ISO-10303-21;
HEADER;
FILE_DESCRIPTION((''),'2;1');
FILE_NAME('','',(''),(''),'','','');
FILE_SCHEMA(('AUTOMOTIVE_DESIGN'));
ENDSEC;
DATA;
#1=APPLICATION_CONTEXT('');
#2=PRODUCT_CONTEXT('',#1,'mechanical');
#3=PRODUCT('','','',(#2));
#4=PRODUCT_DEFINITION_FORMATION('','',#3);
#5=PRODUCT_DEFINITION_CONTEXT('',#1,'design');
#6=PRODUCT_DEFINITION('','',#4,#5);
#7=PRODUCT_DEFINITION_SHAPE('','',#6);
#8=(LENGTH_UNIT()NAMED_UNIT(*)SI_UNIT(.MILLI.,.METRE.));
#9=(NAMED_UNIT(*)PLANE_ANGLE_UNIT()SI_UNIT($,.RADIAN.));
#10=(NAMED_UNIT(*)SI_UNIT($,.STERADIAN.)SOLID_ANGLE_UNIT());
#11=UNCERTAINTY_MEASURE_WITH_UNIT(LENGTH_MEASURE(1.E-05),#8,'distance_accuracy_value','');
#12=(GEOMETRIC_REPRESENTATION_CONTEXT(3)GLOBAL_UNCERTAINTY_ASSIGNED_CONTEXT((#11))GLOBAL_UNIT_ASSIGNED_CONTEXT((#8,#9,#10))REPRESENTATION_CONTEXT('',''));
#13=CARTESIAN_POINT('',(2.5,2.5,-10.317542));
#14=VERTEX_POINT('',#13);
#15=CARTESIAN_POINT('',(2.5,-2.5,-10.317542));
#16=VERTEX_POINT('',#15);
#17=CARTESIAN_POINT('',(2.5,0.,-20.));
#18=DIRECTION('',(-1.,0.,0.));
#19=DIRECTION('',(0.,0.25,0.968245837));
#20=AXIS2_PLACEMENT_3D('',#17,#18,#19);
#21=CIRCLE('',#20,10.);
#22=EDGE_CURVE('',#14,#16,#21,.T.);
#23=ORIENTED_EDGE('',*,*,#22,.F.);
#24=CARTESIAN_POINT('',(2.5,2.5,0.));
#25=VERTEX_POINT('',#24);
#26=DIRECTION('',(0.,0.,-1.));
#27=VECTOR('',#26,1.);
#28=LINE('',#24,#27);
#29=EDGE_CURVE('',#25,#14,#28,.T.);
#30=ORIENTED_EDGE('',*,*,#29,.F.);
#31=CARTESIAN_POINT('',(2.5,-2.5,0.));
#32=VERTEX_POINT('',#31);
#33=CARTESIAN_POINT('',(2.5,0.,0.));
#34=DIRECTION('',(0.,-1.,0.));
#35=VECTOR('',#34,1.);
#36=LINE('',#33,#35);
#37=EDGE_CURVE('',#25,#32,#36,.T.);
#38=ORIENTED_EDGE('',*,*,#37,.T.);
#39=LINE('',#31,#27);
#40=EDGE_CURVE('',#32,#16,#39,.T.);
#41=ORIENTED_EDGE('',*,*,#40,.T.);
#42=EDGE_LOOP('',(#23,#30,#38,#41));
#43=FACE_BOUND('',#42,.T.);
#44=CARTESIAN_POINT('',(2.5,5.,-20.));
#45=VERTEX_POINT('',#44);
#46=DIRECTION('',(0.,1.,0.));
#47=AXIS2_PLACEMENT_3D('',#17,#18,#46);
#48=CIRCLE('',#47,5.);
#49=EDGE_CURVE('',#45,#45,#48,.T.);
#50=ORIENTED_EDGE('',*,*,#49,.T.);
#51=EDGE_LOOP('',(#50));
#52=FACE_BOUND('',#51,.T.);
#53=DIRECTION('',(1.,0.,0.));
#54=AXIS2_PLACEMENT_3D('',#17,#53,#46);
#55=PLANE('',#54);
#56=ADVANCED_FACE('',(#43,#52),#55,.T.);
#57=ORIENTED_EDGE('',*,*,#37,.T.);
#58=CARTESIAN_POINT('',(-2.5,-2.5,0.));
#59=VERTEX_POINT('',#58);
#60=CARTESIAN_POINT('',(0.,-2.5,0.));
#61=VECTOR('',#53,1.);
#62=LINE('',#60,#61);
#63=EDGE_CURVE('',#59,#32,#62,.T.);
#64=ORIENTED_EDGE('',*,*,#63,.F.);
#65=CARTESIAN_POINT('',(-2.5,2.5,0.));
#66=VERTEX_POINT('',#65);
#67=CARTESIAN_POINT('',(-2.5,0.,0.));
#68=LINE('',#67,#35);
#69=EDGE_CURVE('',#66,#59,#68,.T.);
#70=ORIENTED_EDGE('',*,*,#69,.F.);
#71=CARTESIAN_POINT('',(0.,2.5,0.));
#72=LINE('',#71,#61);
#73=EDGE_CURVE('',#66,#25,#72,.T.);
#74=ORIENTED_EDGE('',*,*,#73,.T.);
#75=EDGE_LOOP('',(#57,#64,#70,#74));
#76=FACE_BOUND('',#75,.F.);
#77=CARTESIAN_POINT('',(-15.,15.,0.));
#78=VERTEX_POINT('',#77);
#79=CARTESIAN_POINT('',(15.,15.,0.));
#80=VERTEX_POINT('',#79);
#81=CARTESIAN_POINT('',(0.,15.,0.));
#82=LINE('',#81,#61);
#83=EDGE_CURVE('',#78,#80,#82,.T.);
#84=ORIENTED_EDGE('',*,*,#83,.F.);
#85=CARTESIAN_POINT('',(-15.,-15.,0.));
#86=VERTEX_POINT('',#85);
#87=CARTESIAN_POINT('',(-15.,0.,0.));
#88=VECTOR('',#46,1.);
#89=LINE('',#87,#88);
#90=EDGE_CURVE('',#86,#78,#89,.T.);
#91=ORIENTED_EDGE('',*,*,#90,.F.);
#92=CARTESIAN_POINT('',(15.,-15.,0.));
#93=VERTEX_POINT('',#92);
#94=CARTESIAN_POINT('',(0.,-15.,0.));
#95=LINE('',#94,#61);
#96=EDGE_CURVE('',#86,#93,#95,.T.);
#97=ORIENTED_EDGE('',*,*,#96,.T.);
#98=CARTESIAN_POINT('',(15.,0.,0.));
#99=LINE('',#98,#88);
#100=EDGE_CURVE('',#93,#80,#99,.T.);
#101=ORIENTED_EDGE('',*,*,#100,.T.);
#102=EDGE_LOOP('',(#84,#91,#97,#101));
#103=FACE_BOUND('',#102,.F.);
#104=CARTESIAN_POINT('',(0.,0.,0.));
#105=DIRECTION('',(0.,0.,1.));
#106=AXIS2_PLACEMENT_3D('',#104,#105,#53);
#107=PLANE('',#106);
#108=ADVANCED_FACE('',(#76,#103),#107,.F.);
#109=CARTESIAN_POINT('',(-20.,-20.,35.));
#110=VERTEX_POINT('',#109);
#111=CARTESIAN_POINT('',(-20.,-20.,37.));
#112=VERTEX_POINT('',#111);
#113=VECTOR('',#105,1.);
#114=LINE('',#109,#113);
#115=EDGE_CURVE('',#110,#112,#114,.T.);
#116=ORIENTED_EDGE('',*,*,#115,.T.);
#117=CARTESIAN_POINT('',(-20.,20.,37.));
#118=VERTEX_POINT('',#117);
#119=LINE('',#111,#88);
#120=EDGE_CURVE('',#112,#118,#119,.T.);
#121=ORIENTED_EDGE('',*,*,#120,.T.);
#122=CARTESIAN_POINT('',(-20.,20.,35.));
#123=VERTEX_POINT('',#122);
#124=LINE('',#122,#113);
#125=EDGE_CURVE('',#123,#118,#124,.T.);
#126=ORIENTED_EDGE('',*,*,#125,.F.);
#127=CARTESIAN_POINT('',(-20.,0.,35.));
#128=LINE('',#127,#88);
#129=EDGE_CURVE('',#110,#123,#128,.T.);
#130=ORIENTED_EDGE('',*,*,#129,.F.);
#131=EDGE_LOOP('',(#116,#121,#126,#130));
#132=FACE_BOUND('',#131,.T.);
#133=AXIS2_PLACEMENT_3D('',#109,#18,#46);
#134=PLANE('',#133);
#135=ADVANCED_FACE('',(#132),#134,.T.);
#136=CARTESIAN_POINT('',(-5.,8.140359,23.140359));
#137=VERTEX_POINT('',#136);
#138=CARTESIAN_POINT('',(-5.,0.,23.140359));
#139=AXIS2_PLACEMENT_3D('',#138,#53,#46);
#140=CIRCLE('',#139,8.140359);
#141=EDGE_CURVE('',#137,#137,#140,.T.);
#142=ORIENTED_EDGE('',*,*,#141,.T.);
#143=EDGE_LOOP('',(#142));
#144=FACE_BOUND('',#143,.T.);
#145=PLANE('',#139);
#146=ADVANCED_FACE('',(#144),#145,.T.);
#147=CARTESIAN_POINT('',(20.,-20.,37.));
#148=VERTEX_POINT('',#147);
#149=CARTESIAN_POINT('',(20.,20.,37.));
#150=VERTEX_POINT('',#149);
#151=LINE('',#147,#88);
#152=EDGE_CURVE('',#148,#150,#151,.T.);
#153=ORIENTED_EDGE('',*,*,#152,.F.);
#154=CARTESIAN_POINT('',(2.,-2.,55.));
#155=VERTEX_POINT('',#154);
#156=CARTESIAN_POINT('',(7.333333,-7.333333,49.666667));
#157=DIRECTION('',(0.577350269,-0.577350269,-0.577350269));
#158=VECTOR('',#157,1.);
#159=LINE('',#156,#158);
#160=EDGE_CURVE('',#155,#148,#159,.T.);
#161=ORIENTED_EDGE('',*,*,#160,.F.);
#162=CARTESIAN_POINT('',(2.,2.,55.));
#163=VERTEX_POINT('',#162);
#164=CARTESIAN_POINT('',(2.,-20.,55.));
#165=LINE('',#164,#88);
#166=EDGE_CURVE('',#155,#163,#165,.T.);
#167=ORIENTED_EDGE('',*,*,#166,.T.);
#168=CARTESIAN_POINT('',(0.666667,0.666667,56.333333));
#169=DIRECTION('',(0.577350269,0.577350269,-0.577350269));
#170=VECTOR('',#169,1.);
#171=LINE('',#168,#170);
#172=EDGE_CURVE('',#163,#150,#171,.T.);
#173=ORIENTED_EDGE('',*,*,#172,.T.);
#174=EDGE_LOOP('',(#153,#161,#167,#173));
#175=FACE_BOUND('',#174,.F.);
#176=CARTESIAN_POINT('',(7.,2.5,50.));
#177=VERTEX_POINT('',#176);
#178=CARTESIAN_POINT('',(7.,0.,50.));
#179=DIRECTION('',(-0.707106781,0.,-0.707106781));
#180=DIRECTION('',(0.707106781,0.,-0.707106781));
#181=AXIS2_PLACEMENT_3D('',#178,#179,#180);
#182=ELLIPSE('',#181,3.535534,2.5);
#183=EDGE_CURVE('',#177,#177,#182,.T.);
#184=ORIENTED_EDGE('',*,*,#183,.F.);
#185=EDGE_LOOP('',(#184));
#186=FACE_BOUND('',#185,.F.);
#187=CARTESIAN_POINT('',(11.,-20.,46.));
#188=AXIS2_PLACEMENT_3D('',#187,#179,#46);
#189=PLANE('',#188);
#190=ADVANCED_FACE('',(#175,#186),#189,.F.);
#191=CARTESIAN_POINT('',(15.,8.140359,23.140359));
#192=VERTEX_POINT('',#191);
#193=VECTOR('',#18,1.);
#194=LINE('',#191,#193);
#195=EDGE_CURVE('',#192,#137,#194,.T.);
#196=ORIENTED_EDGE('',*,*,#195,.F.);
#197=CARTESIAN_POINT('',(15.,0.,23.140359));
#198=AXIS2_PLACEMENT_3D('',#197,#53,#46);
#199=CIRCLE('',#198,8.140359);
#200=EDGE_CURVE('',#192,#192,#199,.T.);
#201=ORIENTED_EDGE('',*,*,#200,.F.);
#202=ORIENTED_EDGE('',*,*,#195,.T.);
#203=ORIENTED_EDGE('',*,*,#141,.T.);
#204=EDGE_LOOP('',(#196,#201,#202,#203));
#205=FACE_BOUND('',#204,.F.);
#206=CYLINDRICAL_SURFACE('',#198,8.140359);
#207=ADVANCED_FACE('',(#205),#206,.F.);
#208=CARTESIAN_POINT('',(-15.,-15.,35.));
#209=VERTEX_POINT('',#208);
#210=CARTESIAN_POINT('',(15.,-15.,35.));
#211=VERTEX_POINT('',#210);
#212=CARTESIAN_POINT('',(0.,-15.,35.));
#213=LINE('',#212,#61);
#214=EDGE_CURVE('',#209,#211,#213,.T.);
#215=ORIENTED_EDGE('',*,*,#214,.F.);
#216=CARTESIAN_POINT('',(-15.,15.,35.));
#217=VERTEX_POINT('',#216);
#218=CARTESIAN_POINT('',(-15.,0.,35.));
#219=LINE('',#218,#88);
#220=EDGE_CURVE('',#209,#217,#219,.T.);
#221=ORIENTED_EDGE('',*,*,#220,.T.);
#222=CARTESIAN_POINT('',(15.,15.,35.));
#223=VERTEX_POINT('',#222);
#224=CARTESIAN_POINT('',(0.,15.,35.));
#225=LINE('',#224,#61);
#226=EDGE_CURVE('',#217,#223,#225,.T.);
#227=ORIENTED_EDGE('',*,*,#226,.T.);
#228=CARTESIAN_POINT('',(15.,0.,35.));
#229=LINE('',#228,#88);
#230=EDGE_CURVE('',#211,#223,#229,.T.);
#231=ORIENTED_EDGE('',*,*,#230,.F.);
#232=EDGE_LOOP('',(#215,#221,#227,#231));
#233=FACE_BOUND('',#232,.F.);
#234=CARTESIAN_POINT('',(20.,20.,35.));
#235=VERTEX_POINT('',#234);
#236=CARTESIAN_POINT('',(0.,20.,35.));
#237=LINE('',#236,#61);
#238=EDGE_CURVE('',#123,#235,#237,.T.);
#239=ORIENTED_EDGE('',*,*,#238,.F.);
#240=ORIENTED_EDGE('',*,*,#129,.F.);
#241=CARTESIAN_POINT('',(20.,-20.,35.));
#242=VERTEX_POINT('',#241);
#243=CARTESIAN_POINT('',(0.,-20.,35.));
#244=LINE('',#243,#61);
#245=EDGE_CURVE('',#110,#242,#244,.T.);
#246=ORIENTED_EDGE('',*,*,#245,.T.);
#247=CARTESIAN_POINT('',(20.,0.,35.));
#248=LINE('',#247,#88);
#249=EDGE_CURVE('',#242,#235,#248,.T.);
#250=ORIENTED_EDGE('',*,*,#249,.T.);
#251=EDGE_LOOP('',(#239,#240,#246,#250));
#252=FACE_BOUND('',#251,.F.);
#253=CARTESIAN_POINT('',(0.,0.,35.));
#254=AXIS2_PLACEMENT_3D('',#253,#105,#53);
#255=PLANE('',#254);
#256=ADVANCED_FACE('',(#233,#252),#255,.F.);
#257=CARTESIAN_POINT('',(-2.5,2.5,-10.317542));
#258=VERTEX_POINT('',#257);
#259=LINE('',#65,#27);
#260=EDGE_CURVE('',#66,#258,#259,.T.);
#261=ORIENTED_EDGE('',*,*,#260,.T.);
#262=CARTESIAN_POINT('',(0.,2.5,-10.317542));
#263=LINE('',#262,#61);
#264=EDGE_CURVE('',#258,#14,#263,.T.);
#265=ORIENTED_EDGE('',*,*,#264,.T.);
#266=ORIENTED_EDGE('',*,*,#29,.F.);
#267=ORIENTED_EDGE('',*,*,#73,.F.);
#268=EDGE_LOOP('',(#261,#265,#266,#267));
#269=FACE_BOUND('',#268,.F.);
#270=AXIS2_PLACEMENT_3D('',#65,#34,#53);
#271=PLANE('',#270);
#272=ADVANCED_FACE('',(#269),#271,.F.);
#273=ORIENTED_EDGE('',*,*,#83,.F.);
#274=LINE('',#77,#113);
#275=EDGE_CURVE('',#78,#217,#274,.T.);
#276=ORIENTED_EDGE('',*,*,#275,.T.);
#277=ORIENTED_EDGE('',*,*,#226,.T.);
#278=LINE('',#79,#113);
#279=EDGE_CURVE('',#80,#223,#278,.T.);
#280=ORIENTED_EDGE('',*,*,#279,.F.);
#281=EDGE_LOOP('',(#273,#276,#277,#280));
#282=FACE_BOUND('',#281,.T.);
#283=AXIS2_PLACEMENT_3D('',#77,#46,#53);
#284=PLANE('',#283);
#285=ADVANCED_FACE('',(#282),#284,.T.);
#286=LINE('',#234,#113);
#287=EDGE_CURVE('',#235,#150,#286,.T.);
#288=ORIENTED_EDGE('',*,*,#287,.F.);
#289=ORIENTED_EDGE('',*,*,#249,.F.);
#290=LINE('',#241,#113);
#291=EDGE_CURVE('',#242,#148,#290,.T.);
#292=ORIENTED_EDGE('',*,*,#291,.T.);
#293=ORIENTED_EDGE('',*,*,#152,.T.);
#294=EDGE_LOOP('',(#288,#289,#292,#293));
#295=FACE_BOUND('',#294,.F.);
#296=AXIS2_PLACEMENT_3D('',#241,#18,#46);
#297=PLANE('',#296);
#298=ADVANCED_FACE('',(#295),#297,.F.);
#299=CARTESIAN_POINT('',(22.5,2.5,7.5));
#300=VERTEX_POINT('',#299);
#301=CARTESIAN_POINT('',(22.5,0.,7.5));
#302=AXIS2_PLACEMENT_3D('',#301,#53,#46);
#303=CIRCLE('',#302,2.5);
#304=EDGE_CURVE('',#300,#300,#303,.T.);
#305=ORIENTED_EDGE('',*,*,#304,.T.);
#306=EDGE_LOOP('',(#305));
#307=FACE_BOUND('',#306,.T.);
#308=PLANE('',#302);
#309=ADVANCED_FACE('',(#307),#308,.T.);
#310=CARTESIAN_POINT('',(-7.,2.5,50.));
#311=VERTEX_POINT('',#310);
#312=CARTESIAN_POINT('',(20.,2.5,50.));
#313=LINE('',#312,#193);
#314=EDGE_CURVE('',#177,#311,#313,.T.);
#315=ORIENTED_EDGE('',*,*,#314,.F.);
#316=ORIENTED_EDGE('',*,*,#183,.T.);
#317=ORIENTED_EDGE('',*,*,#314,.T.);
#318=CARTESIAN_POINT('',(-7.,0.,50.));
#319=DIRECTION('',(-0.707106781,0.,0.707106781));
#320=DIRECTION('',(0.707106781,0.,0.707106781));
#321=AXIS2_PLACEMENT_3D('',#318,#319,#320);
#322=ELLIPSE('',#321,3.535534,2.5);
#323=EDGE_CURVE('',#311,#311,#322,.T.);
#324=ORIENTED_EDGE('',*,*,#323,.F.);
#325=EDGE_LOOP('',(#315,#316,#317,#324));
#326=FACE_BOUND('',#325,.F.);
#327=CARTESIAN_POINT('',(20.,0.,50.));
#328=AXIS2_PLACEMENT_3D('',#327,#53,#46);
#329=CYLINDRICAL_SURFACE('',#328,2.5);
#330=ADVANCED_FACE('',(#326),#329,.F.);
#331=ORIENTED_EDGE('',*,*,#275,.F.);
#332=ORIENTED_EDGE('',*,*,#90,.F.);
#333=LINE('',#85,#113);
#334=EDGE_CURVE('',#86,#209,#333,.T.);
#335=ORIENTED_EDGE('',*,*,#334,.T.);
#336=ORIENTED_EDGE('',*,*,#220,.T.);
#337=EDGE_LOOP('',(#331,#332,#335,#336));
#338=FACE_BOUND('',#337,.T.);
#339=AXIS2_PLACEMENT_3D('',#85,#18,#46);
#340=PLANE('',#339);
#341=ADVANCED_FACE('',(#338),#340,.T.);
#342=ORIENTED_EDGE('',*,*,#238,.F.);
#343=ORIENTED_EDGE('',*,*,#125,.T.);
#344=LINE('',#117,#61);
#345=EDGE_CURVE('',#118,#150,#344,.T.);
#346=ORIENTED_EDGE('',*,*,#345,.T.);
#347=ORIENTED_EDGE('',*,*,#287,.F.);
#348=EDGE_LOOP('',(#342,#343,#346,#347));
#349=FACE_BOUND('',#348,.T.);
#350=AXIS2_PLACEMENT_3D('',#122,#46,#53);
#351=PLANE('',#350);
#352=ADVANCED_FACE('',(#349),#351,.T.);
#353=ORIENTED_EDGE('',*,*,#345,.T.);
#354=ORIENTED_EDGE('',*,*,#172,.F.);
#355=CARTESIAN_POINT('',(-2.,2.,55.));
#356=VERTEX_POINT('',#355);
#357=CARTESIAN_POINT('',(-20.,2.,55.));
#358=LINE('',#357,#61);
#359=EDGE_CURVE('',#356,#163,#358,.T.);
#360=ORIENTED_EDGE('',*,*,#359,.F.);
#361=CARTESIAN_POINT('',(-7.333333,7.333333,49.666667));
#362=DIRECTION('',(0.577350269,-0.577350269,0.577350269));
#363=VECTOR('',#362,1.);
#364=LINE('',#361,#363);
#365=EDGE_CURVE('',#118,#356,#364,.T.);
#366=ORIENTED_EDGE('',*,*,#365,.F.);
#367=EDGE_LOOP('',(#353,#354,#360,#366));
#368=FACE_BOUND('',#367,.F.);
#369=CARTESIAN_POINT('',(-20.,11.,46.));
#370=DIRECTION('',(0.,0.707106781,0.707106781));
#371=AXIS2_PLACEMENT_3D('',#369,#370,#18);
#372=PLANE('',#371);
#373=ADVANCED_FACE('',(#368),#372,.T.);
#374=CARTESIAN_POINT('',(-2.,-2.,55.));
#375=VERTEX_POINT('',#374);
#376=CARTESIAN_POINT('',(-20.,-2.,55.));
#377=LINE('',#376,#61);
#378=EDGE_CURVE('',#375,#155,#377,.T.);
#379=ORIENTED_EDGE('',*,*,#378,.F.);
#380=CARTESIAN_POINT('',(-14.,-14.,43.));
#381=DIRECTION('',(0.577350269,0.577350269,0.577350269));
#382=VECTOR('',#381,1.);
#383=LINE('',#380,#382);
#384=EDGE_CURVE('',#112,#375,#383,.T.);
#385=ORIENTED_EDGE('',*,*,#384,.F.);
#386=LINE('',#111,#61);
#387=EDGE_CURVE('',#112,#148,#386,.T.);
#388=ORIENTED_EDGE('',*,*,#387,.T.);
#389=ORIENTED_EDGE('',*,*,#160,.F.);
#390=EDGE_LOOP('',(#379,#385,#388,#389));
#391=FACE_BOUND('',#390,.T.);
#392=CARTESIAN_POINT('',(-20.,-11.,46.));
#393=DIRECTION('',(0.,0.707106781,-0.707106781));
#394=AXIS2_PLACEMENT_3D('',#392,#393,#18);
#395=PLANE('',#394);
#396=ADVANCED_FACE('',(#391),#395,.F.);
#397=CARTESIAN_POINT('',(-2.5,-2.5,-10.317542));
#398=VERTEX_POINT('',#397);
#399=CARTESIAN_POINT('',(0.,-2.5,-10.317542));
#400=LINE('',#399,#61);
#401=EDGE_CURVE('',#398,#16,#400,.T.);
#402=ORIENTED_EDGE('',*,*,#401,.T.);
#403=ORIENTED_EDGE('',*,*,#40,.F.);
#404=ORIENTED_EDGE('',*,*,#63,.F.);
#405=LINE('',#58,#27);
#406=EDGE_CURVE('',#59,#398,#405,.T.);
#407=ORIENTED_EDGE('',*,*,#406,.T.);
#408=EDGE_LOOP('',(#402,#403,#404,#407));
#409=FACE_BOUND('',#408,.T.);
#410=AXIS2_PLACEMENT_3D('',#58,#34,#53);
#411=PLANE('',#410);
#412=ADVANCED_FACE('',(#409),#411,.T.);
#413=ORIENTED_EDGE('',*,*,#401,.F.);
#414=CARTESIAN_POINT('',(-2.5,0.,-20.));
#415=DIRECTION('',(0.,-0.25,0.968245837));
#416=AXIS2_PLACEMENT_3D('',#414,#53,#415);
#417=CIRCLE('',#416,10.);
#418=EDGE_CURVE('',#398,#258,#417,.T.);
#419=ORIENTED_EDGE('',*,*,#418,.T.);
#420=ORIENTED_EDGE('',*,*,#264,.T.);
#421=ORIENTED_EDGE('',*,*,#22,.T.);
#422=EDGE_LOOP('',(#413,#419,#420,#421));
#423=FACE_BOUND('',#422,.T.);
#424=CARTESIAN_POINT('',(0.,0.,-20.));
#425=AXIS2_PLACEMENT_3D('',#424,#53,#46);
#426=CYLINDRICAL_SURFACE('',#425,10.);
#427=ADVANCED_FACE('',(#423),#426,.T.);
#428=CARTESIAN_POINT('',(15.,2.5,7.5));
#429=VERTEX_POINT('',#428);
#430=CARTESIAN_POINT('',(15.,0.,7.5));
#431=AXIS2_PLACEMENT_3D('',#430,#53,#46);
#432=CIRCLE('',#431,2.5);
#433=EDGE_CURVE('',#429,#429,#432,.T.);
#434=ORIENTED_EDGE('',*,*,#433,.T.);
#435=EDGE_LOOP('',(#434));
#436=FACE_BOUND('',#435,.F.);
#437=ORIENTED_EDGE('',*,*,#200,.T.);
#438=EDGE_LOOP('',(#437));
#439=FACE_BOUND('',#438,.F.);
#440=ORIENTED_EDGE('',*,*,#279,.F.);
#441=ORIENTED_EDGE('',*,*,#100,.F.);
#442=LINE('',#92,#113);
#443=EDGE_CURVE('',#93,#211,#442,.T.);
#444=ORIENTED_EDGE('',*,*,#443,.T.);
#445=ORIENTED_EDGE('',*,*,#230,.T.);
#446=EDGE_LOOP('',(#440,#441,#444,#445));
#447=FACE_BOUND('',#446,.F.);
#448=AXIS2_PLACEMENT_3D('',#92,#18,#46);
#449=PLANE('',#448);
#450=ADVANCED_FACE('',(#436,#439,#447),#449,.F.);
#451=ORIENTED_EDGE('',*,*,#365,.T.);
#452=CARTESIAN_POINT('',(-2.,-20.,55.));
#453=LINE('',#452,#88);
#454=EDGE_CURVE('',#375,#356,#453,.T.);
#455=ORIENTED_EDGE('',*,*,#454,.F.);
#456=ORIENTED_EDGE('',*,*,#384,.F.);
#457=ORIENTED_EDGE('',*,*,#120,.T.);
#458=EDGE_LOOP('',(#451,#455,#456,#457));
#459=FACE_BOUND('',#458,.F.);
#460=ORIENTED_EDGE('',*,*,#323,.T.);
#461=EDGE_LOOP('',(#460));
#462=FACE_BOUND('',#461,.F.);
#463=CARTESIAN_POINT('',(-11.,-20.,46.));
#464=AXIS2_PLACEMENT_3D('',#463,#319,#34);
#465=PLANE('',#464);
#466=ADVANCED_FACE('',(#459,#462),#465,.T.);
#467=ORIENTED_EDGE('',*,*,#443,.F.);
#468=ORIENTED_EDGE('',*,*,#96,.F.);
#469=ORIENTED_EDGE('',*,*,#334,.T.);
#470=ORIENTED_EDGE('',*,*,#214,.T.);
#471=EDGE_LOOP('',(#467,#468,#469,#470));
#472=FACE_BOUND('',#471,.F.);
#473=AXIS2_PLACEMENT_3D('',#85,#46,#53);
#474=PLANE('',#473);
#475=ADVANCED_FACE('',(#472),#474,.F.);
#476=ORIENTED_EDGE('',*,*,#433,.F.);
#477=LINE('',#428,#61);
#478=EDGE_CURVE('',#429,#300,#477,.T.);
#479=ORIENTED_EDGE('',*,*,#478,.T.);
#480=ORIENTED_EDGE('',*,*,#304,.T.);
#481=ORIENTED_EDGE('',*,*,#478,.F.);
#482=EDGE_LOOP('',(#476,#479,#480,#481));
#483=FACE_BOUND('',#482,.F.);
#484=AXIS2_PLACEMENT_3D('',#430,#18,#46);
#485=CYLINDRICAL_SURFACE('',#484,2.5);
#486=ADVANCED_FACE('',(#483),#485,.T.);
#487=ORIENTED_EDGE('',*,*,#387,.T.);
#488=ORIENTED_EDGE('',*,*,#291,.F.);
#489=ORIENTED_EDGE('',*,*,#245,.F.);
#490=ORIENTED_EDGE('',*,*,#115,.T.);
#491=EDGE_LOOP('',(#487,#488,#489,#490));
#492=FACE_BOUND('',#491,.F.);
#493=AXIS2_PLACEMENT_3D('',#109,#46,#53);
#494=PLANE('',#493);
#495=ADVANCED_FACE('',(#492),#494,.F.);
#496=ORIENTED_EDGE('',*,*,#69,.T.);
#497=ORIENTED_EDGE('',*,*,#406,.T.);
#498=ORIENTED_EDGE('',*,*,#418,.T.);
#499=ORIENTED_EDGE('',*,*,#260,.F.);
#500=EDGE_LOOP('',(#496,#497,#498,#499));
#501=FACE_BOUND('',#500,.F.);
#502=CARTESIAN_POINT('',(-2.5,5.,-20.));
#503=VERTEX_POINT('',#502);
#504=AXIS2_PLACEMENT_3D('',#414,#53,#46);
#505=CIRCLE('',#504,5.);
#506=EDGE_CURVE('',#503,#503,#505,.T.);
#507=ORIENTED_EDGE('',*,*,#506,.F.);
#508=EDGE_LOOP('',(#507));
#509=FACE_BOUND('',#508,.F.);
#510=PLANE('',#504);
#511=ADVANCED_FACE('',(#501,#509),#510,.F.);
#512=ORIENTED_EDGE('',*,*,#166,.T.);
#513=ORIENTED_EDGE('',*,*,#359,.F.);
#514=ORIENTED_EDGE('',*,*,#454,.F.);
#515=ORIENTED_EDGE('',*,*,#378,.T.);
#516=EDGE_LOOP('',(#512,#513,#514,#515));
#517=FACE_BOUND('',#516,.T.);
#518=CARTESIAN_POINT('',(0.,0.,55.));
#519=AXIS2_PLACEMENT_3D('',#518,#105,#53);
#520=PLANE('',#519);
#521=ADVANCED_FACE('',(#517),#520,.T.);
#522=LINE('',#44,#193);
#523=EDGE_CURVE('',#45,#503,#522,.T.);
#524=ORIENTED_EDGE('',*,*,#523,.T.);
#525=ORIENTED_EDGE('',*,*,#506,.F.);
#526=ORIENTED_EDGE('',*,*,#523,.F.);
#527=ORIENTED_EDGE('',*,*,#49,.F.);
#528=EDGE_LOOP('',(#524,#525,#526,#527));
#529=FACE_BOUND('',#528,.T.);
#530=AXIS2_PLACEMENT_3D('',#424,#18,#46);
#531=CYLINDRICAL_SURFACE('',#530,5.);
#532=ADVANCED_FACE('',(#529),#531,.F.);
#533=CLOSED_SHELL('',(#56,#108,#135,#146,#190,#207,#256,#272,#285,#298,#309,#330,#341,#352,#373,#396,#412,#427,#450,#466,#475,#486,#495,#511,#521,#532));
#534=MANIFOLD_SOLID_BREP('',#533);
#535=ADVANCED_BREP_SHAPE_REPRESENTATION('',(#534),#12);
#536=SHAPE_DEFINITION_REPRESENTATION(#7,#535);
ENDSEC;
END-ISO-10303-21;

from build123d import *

# Parameters (mm, degrees)
F0_W      = 30
F0_H      = 30
F1_DEPTH  = 35
F2_W      = 40
F2_H      = 40
F3_DEPTH  = 20
F4_SIZE   = 18
F5_R      = 8.1403588374
F6_DEPTH  = 20
F7_R      = 2.5
F8_DEPTH  = 7.5
F9_R      = 2.5
F10_DEPTH = 79.502
F11_W     = 5
F11_H     = 5
F12_DEPTH = 15
F13_R     = 10
F13_R_2   = 5
F14_DEPTH = 2.5


# Not quite as in the source:
# - a feature names something its author has since deleted; it is built from what else it names


with BuildPart() as f1:
    # F0 (on Top) → F1 (new body)
    with BuildSketch(Plane.XY):
        Rectangle(F0_W, F0_H)
    extrude(amount=F1_DEPTH)

    # F2 (on face) → F3 (join)
    with BuildSketch(Plane.XY.offset(35)):
        Rectangle(F2_W, F2_H)
    extrude(amount=F3_DEPTH)

    # F4
    f4_edges = [f1.edges().sort_by_distance(p)[0] for p in [
        (20, 0, 55),
        (0, 20, 55),
        (-20, 0, 55),
        (0, -20, 55),
    ]]
    chamfer(f4_edges, length=F4_SIZE)

    # F5 (on face) → F6 (cut)
    with BuildSketch(Plane.YZ.offset(15)):
        with Locations((0, 23.1403588374)):
            Circle(F5_R)
    extrude(amount=-F6_DEPTH, mode=Mode.SUBTRACT)

    # F7 (on face) → F8 (join)
    with BuildSketch(Plane.YZ.offset(15)):
        with Locations((0, 7.5)):
            Circle(F7_R)
    extrude(amount=F8_DEPTH)

    # F9 (on face) → F10 (cut)
    with BuildSketch(Plane.YZ.offset(20)):
        with Locations((0, 50)):
            Circle(F9_R)
    extrude(amount=-F10_DEPTH, mode=Mode.SUBTRACT)

    # F11 (on face) → F12 (join)
    with BuildSketch(Plane(origin=(0, 0, 0), x_dir=(1, 0, 0), z_dir=(0, 0, -1))):
        Rectangle(F11_W, F11_H)
    extrude(amount=F12_DEPTH)

    # F13 (on Right) → F14 (join, symmetric)
    with BuildSketch(Plane.YZ):
        with Locations((0, -20)):
            Circle(F13_R)
        with Locations((0, -20)):
            Circle(F13_R_2, mode=Mode.SUBTRACT)
    extrude(amount=F14_DEPTH, both=True)


solid = f1.part
